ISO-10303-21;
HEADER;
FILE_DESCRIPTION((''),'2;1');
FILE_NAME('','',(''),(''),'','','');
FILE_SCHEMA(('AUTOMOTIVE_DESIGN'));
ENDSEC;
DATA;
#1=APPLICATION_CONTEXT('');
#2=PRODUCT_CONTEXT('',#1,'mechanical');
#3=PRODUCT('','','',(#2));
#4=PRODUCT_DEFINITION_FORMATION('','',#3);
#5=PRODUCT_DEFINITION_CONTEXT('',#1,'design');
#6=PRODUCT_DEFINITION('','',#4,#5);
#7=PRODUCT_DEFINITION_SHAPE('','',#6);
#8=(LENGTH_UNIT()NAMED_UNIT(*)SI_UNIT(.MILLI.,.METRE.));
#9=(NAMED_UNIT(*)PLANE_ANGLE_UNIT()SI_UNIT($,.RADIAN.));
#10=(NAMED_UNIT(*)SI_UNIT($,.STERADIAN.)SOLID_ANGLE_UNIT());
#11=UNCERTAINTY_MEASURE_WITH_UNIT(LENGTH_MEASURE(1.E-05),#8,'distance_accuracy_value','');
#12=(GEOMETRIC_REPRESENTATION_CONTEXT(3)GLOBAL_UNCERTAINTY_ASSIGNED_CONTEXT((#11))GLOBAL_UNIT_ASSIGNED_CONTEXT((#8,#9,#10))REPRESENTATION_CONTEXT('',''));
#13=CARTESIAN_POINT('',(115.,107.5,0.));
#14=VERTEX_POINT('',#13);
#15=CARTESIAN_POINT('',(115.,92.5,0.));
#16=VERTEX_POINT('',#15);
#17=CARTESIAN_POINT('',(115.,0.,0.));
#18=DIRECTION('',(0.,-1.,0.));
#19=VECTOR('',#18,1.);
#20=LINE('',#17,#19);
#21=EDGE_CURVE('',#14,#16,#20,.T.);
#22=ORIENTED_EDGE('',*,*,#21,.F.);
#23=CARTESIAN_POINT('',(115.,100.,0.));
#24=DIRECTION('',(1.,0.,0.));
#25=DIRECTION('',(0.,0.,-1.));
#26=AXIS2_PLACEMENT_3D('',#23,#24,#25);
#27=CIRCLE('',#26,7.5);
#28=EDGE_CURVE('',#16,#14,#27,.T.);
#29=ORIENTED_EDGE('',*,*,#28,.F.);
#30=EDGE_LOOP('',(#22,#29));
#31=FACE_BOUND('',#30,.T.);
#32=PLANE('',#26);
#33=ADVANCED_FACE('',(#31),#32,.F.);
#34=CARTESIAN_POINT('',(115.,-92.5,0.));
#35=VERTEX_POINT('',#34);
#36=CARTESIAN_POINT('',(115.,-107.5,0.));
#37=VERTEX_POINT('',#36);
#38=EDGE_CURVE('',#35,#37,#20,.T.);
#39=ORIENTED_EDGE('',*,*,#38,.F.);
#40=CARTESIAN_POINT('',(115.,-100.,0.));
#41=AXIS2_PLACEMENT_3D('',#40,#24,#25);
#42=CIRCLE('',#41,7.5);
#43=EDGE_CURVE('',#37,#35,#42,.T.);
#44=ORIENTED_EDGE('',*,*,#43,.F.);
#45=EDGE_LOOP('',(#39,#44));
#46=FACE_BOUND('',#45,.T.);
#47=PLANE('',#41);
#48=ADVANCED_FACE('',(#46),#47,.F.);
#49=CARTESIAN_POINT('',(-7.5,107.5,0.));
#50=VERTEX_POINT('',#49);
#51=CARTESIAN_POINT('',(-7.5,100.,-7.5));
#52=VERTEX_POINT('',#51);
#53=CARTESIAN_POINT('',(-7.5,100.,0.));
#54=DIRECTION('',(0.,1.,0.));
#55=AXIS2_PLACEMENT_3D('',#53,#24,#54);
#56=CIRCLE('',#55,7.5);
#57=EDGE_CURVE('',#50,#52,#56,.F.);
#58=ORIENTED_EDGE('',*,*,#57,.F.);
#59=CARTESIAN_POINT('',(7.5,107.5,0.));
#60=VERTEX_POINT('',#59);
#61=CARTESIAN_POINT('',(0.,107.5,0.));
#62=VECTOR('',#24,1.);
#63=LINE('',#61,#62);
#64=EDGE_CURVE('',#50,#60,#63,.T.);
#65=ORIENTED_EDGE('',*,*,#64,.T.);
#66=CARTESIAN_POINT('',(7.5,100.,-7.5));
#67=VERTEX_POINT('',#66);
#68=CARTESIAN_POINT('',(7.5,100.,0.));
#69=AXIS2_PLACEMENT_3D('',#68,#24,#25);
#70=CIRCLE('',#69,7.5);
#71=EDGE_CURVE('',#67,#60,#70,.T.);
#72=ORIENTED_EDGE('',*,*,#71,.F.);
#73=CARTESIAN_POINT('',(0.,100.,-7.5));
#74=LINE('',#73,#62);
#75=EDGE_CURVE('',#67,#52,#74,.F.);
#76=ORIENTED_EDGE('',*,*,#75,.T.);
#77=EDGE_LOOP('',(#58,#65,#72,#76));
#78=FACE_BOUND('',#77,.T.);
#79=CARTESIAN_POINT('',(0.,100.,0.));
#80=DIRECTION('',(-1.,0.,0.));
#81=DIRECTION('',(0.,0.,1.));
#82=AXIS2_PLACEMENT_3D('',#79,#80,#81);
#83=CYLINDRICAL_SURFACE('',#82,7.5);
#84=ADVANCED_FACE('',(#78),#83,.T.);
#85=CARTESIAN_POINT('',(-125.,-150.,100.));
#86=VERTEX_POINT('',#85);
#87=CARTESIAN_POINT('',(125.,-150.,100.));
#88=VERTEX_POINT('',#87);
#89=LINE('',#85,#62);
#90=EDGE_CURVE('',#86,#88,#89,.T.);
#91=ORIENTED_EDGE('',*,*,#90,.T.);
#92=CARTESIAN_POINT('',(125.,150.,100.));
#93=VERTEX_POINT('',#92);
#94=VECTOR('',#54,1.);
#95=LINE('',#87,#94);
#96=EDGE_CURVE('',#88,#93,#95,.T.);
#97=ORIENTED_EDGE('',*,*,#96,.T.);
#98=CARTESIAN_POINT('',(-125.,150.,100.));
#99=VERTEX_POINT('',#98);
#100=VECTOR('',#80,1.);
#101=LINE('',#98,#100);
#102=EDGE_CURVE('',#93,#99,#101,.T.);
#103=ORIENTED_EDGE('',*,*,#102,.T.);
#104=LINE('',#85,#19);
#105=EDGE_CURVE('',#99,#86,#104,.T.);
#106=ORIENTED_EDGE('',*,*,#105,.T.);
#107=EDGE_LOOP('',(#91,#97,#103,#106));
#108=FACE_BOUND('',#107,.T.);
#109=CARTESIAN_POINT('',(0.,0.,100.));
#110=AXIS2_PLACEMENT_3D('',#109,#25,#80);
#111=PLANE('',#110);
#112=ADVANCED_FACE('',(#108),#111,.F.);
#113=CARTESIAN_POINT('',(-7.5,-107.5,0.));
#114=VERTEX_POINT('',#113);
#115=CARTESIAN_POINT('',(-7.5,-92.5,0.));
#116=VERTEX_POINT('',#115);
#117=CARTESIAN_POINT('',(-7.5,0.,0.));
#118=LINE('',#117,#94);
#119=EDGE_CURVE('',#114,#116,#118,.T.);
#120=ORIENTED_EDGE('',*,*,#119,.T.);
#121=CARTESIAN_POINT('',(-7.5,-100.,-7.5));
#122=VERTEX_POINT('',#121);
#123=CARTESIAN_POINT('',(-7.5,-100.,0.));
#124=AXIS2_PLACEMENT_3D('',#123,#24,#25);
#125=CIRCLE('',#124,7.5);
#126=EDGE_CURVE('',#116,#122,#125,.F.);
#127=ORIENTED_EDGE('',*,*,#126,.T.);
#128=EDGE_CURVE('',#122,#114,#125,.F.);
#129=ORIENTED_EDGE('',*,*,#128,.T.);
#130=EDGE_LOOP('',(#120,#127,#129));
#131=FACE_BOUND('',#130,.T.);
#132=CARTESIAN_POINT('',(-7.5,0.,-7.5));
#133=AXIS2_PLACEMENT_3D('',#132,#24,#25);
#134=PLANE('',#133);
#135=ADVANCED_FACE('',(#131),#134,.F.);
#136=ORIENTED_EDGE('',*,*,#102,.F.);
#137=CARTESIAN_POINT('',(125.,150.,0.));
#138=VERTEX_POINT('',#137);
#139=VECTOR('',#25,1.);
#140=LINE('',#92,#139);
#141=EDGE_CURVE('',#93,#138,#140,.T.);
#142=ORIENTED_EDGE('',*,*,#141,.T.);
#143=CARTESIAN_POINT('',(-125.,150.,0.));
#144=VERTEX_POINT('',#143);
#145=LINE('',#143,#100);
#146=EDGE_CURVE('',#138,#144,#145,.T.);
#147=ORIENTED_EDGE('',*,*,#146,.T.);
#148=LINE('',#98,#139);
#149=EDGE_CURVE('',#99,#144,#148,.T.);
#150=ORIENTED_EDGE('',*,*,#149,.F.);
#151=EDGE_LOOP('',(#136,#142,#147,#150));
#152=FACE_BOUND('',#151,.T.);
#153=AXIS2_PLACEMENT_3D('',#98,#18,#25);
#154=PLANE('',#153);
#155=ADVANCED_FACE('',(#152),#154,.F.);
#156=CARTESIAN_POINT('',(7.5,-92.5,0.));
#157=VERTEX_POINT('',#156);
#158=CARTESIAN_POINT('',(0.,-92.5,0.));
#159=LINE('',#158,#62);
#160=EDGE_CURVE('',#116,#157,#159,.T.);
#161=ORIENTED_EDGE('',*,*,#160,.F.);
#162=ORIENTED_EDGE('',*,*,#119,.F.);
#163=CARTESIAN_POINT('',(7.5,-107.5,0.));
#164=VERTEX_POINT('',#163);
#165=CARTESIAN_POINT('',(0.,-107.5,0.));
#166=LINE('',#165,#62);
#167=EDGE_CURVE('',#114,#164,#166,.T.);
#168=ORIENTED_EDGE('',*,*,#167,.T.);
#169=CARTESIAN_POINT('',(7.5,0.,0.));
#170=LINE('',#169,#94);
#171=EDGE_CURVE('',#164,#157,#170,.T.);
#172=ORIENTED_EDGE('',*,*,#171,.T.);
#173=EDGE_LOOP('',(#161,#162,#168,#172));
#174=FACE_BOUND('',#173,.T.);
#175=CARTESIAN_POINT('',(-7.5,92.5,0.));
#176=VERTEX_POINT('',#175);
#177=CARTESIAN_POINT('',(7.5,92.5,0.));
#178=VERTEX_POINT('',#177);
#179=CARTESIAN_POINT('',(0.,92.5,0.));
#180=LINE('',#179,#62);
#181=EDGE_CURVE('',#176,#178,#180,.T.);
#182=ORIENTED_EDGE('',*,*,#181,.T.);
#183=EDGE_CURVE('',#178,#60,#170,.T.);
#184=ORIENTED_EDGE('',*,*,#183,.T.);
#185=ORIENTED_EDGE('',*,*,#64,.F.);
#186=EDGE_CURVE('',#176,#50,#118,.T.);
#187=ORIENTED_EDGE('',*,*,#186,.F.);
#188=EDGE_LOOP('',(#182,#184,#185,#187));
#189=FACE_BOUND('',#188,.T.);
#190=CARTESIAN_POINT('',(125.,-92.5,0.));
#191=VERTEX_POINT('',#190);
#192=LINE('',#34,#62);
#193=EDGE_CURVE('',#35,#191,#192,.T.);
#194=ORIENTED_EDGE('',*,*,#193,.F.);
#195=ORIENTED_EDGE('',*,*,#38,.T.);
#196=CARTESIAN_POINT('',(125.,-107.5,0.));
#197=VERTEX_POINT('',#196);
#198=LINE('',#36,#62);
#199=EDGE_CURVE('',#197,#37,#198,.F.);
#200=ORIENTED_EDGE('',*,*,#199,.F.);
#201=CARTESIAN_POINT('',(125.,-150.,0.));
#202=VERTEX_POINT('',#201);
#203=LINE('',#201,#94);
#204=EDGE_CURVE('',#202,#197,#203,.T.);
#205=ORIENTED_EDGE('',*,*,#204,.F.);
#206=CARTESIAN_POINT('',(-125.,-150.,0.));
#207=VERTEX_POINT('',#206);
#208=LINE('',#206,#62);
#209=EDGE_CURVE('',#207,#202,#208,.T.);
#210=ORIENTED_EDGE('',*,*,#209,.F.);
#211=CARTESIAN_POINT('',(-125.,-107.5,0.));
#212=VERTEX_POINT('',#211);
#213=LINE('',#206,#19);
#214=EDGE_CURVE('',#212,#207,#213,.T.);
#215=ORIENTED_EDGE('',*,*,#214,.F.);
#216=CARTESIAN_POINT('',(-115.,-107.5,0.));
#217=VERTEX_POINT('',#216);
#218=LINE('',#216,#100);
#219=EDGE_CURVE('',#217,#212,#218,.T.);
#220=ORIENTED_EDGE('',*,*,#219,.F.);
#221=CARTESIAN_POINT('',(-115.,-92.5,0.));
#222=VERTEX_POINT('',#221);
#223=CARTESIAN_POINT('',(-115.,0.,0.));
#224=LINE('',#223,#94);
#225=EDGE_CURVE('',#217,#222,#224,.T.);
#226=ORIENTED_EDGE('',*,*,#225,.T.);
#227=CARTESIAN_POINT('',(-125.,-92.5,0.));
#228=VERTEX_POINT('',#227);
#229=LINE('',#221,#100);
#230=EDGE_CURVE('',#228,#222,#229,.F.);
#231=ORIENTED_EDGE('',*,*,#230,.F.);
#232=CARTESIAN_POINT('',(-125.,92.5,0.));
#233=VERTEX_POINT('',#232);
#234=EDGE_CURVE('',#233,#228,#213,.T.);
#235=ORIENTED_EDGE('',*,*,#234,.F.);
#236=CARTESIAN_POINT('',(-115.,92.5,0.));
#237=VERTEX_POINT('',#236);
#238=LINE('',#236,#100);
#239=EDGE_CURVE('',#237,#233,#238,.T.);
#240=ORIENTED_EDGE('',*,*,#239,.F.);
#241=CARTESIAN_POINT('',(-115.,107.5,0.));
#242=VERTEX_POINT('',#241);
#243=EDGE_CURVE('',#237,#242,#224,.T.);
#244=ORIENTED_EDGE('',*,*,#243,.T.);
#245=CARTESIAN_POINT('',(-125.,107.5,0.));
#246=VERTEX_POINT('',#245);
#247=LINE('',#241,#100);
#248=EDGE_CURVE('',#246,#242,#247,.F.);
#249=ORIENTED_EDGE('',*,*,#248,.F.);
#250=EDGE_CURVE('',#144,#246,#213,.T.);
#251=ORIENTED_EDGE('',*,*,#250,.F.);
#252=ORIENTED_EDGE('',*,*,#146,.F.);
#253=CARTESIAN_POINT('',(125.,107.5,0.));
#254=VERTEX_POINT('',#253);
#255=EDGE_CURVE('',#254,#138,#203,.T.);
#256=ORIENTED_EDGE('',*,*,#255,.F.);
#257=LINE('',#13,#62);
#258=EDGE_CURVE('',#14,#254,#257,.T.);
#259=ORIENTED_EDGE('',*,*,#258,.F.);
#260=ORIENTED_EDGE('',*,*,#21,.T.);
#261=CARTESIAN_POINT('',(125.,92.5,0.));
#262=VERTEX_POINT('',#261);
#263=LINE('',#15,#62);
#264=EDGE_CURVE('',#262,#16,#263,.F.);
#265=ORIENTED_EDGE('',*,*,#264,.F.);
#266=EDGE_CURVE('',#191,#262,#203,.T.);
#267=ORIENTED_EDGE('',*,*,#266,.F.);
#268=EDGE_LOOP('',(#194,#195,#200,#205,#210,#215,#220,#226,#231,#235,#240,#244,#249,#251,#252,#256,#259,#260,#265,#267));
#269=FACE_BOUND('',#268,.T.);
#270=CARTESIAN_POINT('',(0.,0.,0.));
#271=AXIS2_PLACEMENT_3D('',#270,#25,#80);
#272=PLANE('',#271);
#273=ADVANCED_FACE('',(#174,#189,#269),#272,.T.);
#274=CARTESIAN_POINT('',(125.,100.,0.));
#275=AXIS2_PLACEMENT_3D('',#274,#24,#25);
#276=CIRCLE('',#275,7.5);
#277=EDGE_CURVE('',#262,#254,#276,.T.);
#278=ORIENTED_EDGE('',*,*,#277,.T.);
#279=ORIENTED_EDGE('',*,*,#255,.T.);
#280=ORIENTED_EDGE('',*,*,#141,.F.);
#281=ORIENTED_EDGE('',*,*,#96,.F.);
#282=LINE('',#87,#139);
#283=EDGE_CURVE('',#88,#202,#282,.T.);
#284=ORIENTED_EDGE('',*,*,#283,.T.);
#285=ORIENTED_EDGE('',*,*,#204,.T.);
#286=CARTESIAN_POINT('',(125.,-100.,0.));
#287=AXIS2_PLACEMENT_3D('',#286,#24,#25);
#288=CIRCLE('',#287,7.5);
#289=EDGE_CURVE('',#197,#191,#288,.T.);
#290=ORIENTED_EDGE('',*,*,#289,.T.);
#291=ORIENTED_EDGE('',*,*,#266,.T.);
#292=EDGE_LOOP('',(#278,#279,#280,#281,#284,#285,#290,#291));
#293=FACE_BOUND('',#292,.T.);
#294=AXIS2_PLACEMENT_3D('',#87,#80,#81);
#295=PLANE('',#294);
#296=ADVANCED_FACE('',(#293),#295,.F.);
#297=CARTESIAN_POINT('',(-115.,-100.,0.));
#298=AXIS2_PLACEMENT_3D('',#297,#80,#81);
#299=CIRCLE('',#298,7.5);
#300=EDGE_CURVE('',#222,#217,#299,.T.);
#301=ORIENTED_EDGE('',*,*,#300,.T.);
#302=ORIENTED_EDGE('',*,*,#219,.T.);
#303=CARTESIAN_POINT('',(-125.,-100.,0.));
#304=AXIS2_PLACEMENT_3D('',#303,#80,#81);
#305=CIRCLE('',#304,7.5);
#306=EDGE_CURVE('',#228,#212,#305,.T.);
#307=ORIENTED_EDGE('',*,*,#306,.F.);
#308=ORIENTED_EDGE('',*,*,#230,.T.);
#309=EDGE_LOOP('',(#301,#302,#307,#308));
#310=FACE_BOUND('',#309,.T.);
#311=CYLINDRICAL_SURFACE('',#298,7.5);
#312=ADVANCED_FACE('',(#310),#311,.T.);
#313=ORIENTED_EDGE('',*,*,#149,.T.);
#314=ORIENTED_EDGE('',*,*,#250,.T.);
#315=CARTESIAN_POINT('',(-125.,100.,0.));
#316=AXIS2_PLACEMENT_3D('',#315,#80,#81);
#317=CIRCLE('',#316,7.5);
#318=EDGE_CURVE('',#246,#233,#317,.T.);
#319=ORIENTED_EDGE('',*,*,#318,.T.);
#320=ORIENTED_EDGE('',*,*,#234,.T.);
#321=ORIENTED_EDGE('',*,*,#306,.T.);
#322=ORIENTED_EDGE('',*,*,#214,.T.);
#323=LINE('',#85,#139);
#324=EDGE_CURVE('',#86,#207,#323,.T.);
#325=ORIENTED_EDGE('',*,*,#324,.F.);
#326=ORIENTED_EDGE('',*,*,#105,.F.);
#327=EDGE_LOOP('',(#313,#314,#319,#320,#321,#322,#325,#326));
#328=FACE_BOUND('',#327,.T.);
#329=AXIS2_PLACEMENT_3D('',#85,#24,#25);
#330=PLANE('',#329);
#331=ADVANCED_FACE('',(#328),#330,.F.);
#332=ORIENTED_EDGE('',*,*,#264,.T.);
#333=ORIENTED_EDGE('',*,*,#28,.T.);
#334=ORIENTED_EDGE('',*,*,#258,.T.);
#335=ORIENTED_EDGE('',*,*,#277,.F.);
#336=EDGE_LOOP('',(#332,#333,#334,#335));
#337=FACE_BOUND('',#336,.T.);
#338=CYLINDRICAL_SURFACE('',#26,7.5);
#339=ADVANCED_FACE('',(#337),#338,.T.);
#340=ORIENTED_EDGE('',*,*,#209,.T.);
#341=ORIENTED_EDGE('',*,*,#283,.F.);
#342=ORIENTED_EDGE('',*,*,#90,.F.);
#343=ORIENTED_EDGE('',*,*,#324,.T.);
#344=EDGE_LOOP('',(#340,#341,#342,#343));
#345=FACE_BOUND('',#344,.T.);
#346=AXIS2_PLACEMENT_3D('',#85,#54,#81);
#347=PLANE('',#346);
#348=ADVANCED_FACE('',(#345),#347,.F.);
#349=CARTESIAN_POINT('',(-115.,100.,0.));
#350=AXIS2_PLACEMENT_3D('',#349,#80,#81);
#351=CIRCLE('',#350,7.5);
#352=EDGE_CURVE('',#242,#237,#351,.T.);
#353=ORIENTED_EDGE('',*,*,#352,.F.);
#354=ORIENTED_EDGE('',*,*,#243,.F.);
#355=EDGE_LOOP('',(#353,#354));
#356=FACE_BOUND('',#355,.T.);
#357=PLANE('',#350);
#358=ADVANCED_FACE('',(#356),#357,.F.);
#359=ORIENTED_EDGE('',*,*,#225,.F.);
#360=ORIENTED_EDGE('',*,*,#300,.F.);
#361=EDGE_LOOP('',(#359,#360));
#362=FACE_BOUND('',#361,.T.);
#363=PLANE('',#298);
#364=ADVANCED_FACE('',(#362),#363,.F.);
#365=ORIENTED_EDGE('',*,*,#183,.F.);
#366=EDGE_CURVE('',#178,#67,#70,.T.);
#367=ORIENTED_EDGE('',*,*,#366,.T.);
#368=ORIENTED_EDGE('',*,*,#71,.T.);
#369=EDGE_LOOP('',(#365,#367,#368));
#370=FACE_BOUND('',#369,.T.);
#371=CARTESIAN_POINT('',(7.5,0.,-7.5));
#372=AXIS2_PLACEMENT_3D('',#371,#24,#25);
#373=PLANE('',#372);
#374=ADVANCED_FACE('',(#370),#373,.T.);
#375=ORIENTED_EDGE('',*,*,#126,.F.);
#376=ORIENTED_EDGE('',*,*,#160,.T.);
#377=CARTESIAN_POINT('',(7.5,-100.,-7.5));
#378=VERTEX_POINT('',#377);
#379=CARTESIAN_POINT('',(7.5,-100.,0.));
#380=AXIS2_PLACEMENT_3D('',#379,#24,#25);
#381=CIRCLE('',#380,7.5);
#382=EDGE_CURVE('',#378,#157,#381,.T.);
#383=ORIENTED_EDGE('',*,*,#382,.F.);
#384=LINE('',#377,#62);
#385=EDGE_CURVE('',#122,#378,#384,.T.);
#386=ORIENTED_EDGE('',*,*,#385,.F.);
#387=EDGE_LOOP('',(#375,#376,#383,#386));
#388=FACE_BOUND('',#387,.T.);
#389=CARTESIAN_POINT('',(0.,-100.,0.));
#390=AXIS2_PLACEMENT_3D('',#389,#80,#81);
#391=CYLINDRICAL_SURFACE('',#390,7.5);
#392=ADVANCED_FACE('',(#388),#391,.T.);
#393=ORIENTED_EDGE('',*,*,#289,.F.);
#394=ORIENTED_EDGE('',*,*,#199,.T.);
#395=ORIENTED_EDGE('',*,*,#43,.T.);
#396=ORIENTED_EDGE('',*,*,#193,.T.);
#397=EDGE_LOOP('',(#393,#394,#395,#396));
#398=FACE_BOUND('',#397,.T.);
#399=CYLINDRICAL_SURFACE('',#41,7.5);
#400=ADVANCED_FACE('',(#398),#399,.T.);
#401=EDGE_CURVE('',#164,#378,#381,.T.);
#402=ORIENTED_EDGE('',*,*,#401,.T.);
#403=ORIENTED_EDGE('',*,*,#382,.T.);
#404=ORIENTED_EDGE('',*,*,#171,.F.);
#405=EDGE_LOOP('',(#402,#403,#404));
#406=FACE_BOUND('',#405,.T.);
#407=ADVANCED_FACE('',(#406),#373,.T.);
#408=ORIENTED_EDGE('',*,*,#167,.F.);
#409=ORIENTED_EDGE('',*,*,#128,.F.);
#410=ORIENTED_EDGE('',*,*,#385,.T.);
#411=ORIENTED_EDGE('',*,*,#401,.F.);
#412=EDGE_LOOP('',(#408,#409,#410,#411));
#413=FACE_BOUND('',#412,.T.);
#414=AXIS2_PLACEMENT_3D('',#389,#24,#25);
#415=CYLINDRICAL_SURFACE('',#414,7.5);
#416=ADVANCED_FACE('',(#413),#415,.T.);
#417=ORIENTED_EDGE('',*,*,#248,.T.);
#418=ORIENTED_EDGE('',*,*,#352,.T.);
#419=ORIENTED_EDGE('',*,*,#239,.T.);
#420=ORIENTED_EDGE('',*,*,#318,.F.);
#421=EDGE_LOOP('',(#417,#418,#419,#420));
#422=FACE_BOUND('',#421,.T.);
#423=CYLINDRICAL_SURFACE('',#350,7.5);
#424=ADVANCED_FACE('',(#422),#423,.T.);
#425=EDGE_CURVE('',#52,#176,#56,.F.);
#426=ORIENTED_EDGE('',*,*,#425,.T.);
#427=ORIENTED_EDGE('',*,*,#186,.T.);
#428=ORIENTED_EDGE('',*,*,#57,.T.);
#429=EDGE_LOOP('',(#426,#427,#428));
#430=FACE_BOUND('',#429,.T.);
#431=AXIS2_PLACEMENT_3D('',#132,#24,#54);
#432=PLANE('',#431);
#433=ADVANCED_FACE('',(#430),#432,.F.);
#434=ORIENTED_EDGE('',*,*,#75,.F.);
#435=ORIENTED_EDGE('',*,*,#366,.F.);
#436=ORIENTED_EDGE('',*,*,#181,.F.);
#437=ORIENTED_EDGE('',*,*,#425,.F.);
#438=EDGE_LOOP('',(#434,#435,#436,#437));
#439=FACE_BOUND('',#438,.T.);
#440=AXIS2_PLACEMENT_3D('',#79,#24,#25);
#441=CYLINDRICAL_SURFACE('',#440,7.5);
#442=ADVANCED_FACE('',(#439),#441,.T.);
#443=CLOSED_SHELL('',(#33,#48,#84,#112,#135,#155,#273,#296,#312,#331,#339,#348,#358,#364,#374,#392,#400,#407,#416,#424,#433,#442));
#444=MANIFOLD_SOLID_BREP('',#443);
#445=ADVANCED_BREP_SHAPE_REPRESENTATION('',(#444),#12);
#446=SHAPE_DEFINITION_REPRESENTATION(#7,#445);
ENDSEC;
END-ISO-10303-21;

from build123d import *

# Parameters (mm, degrees)
SKETCH1_W           = 250
SKETCH1_H           = 300
BOSS_EXTRUDE1_DEPTH = 100
SKETCH2_W           = 15
SKETCH2_H           = 15
BOSS_EXTRUDE2_DEPTH = 7.5
FILLET1_R           = 7.5
SKETCH3_R           = 7.5
BOSS_EXTRUDE3_DEPTH = 10
BOSS_EXTRUDE4_START = -10
SKETCH4_R           = 7.5
BOSS_EXTRUDE4_DEPTH = 10


with BuildPart() as part:
    # Sketch1 → Boss-Extrude1 (new body)
    with BuildSketch(Plane.XY):
        Rectangle(SKETCH1_W, SKETCH1_H)
    extrude(amount=BOSS_EXTRUDE1_DEPTH)

    # Sketch2 → Boss-Extrude2 (add)
    with BuildSketch(Plane(origin=(0, 0, 0), x_dir=(-1, 0, 0), z_dir=(0, 0, -1))):
        with Locations((0, 100)):
            Rectangle(SKETCH2_W, SKETCH2_H)
        with Locations((0, -100)):
            Rectangle(SKETCH2_W, SKETCH2_H)
    extrude(amount=BOSS_EXTRUDE2_DEPTH)

    # Fillet1
    fillet1_edges = [part.edges().sort_by_distance(p)[0] for p in [
        (0, 107.5, -7.5),
        (0, 92.5, -7.5),
        (0, -107.5, -7.5),
        (0, -92.5, -7.5),
    ]]
    fillet(fillet1_edges, radius=FILLET1_R - 0.0001)  # a hair under: the kernel refuses the full size

    # Sketch3 → Boss-Extrude3 (add)
    with BuildSketch(Plane.ZY.offset(125)):
        with Locations((0, 100)):
            Circle(SKETCH3_R)
        with Locations((0, -100)):
            Circle(SKETCH3_R)
    extrude(amount=-BOSS_EXTRUDE3_DEPTH)

    # Sketch4 → Boss-Extrude4 (add)
    with BuildSketch(Plane(origin=(125, 0, 0), x_dir=(0, 0, -1), z_dir=(1, 0, 0)).offset(BOSS_EXTRUDE4_START)):
        with Locations((0, 100)):
            Circle(SKETCH4_R)
        with Locations((0, -100)):
            Circle(SKETCH4_R)
    extrude(amount=BOSS_EXTRUDE4_DEPTH)


solid = part.part
